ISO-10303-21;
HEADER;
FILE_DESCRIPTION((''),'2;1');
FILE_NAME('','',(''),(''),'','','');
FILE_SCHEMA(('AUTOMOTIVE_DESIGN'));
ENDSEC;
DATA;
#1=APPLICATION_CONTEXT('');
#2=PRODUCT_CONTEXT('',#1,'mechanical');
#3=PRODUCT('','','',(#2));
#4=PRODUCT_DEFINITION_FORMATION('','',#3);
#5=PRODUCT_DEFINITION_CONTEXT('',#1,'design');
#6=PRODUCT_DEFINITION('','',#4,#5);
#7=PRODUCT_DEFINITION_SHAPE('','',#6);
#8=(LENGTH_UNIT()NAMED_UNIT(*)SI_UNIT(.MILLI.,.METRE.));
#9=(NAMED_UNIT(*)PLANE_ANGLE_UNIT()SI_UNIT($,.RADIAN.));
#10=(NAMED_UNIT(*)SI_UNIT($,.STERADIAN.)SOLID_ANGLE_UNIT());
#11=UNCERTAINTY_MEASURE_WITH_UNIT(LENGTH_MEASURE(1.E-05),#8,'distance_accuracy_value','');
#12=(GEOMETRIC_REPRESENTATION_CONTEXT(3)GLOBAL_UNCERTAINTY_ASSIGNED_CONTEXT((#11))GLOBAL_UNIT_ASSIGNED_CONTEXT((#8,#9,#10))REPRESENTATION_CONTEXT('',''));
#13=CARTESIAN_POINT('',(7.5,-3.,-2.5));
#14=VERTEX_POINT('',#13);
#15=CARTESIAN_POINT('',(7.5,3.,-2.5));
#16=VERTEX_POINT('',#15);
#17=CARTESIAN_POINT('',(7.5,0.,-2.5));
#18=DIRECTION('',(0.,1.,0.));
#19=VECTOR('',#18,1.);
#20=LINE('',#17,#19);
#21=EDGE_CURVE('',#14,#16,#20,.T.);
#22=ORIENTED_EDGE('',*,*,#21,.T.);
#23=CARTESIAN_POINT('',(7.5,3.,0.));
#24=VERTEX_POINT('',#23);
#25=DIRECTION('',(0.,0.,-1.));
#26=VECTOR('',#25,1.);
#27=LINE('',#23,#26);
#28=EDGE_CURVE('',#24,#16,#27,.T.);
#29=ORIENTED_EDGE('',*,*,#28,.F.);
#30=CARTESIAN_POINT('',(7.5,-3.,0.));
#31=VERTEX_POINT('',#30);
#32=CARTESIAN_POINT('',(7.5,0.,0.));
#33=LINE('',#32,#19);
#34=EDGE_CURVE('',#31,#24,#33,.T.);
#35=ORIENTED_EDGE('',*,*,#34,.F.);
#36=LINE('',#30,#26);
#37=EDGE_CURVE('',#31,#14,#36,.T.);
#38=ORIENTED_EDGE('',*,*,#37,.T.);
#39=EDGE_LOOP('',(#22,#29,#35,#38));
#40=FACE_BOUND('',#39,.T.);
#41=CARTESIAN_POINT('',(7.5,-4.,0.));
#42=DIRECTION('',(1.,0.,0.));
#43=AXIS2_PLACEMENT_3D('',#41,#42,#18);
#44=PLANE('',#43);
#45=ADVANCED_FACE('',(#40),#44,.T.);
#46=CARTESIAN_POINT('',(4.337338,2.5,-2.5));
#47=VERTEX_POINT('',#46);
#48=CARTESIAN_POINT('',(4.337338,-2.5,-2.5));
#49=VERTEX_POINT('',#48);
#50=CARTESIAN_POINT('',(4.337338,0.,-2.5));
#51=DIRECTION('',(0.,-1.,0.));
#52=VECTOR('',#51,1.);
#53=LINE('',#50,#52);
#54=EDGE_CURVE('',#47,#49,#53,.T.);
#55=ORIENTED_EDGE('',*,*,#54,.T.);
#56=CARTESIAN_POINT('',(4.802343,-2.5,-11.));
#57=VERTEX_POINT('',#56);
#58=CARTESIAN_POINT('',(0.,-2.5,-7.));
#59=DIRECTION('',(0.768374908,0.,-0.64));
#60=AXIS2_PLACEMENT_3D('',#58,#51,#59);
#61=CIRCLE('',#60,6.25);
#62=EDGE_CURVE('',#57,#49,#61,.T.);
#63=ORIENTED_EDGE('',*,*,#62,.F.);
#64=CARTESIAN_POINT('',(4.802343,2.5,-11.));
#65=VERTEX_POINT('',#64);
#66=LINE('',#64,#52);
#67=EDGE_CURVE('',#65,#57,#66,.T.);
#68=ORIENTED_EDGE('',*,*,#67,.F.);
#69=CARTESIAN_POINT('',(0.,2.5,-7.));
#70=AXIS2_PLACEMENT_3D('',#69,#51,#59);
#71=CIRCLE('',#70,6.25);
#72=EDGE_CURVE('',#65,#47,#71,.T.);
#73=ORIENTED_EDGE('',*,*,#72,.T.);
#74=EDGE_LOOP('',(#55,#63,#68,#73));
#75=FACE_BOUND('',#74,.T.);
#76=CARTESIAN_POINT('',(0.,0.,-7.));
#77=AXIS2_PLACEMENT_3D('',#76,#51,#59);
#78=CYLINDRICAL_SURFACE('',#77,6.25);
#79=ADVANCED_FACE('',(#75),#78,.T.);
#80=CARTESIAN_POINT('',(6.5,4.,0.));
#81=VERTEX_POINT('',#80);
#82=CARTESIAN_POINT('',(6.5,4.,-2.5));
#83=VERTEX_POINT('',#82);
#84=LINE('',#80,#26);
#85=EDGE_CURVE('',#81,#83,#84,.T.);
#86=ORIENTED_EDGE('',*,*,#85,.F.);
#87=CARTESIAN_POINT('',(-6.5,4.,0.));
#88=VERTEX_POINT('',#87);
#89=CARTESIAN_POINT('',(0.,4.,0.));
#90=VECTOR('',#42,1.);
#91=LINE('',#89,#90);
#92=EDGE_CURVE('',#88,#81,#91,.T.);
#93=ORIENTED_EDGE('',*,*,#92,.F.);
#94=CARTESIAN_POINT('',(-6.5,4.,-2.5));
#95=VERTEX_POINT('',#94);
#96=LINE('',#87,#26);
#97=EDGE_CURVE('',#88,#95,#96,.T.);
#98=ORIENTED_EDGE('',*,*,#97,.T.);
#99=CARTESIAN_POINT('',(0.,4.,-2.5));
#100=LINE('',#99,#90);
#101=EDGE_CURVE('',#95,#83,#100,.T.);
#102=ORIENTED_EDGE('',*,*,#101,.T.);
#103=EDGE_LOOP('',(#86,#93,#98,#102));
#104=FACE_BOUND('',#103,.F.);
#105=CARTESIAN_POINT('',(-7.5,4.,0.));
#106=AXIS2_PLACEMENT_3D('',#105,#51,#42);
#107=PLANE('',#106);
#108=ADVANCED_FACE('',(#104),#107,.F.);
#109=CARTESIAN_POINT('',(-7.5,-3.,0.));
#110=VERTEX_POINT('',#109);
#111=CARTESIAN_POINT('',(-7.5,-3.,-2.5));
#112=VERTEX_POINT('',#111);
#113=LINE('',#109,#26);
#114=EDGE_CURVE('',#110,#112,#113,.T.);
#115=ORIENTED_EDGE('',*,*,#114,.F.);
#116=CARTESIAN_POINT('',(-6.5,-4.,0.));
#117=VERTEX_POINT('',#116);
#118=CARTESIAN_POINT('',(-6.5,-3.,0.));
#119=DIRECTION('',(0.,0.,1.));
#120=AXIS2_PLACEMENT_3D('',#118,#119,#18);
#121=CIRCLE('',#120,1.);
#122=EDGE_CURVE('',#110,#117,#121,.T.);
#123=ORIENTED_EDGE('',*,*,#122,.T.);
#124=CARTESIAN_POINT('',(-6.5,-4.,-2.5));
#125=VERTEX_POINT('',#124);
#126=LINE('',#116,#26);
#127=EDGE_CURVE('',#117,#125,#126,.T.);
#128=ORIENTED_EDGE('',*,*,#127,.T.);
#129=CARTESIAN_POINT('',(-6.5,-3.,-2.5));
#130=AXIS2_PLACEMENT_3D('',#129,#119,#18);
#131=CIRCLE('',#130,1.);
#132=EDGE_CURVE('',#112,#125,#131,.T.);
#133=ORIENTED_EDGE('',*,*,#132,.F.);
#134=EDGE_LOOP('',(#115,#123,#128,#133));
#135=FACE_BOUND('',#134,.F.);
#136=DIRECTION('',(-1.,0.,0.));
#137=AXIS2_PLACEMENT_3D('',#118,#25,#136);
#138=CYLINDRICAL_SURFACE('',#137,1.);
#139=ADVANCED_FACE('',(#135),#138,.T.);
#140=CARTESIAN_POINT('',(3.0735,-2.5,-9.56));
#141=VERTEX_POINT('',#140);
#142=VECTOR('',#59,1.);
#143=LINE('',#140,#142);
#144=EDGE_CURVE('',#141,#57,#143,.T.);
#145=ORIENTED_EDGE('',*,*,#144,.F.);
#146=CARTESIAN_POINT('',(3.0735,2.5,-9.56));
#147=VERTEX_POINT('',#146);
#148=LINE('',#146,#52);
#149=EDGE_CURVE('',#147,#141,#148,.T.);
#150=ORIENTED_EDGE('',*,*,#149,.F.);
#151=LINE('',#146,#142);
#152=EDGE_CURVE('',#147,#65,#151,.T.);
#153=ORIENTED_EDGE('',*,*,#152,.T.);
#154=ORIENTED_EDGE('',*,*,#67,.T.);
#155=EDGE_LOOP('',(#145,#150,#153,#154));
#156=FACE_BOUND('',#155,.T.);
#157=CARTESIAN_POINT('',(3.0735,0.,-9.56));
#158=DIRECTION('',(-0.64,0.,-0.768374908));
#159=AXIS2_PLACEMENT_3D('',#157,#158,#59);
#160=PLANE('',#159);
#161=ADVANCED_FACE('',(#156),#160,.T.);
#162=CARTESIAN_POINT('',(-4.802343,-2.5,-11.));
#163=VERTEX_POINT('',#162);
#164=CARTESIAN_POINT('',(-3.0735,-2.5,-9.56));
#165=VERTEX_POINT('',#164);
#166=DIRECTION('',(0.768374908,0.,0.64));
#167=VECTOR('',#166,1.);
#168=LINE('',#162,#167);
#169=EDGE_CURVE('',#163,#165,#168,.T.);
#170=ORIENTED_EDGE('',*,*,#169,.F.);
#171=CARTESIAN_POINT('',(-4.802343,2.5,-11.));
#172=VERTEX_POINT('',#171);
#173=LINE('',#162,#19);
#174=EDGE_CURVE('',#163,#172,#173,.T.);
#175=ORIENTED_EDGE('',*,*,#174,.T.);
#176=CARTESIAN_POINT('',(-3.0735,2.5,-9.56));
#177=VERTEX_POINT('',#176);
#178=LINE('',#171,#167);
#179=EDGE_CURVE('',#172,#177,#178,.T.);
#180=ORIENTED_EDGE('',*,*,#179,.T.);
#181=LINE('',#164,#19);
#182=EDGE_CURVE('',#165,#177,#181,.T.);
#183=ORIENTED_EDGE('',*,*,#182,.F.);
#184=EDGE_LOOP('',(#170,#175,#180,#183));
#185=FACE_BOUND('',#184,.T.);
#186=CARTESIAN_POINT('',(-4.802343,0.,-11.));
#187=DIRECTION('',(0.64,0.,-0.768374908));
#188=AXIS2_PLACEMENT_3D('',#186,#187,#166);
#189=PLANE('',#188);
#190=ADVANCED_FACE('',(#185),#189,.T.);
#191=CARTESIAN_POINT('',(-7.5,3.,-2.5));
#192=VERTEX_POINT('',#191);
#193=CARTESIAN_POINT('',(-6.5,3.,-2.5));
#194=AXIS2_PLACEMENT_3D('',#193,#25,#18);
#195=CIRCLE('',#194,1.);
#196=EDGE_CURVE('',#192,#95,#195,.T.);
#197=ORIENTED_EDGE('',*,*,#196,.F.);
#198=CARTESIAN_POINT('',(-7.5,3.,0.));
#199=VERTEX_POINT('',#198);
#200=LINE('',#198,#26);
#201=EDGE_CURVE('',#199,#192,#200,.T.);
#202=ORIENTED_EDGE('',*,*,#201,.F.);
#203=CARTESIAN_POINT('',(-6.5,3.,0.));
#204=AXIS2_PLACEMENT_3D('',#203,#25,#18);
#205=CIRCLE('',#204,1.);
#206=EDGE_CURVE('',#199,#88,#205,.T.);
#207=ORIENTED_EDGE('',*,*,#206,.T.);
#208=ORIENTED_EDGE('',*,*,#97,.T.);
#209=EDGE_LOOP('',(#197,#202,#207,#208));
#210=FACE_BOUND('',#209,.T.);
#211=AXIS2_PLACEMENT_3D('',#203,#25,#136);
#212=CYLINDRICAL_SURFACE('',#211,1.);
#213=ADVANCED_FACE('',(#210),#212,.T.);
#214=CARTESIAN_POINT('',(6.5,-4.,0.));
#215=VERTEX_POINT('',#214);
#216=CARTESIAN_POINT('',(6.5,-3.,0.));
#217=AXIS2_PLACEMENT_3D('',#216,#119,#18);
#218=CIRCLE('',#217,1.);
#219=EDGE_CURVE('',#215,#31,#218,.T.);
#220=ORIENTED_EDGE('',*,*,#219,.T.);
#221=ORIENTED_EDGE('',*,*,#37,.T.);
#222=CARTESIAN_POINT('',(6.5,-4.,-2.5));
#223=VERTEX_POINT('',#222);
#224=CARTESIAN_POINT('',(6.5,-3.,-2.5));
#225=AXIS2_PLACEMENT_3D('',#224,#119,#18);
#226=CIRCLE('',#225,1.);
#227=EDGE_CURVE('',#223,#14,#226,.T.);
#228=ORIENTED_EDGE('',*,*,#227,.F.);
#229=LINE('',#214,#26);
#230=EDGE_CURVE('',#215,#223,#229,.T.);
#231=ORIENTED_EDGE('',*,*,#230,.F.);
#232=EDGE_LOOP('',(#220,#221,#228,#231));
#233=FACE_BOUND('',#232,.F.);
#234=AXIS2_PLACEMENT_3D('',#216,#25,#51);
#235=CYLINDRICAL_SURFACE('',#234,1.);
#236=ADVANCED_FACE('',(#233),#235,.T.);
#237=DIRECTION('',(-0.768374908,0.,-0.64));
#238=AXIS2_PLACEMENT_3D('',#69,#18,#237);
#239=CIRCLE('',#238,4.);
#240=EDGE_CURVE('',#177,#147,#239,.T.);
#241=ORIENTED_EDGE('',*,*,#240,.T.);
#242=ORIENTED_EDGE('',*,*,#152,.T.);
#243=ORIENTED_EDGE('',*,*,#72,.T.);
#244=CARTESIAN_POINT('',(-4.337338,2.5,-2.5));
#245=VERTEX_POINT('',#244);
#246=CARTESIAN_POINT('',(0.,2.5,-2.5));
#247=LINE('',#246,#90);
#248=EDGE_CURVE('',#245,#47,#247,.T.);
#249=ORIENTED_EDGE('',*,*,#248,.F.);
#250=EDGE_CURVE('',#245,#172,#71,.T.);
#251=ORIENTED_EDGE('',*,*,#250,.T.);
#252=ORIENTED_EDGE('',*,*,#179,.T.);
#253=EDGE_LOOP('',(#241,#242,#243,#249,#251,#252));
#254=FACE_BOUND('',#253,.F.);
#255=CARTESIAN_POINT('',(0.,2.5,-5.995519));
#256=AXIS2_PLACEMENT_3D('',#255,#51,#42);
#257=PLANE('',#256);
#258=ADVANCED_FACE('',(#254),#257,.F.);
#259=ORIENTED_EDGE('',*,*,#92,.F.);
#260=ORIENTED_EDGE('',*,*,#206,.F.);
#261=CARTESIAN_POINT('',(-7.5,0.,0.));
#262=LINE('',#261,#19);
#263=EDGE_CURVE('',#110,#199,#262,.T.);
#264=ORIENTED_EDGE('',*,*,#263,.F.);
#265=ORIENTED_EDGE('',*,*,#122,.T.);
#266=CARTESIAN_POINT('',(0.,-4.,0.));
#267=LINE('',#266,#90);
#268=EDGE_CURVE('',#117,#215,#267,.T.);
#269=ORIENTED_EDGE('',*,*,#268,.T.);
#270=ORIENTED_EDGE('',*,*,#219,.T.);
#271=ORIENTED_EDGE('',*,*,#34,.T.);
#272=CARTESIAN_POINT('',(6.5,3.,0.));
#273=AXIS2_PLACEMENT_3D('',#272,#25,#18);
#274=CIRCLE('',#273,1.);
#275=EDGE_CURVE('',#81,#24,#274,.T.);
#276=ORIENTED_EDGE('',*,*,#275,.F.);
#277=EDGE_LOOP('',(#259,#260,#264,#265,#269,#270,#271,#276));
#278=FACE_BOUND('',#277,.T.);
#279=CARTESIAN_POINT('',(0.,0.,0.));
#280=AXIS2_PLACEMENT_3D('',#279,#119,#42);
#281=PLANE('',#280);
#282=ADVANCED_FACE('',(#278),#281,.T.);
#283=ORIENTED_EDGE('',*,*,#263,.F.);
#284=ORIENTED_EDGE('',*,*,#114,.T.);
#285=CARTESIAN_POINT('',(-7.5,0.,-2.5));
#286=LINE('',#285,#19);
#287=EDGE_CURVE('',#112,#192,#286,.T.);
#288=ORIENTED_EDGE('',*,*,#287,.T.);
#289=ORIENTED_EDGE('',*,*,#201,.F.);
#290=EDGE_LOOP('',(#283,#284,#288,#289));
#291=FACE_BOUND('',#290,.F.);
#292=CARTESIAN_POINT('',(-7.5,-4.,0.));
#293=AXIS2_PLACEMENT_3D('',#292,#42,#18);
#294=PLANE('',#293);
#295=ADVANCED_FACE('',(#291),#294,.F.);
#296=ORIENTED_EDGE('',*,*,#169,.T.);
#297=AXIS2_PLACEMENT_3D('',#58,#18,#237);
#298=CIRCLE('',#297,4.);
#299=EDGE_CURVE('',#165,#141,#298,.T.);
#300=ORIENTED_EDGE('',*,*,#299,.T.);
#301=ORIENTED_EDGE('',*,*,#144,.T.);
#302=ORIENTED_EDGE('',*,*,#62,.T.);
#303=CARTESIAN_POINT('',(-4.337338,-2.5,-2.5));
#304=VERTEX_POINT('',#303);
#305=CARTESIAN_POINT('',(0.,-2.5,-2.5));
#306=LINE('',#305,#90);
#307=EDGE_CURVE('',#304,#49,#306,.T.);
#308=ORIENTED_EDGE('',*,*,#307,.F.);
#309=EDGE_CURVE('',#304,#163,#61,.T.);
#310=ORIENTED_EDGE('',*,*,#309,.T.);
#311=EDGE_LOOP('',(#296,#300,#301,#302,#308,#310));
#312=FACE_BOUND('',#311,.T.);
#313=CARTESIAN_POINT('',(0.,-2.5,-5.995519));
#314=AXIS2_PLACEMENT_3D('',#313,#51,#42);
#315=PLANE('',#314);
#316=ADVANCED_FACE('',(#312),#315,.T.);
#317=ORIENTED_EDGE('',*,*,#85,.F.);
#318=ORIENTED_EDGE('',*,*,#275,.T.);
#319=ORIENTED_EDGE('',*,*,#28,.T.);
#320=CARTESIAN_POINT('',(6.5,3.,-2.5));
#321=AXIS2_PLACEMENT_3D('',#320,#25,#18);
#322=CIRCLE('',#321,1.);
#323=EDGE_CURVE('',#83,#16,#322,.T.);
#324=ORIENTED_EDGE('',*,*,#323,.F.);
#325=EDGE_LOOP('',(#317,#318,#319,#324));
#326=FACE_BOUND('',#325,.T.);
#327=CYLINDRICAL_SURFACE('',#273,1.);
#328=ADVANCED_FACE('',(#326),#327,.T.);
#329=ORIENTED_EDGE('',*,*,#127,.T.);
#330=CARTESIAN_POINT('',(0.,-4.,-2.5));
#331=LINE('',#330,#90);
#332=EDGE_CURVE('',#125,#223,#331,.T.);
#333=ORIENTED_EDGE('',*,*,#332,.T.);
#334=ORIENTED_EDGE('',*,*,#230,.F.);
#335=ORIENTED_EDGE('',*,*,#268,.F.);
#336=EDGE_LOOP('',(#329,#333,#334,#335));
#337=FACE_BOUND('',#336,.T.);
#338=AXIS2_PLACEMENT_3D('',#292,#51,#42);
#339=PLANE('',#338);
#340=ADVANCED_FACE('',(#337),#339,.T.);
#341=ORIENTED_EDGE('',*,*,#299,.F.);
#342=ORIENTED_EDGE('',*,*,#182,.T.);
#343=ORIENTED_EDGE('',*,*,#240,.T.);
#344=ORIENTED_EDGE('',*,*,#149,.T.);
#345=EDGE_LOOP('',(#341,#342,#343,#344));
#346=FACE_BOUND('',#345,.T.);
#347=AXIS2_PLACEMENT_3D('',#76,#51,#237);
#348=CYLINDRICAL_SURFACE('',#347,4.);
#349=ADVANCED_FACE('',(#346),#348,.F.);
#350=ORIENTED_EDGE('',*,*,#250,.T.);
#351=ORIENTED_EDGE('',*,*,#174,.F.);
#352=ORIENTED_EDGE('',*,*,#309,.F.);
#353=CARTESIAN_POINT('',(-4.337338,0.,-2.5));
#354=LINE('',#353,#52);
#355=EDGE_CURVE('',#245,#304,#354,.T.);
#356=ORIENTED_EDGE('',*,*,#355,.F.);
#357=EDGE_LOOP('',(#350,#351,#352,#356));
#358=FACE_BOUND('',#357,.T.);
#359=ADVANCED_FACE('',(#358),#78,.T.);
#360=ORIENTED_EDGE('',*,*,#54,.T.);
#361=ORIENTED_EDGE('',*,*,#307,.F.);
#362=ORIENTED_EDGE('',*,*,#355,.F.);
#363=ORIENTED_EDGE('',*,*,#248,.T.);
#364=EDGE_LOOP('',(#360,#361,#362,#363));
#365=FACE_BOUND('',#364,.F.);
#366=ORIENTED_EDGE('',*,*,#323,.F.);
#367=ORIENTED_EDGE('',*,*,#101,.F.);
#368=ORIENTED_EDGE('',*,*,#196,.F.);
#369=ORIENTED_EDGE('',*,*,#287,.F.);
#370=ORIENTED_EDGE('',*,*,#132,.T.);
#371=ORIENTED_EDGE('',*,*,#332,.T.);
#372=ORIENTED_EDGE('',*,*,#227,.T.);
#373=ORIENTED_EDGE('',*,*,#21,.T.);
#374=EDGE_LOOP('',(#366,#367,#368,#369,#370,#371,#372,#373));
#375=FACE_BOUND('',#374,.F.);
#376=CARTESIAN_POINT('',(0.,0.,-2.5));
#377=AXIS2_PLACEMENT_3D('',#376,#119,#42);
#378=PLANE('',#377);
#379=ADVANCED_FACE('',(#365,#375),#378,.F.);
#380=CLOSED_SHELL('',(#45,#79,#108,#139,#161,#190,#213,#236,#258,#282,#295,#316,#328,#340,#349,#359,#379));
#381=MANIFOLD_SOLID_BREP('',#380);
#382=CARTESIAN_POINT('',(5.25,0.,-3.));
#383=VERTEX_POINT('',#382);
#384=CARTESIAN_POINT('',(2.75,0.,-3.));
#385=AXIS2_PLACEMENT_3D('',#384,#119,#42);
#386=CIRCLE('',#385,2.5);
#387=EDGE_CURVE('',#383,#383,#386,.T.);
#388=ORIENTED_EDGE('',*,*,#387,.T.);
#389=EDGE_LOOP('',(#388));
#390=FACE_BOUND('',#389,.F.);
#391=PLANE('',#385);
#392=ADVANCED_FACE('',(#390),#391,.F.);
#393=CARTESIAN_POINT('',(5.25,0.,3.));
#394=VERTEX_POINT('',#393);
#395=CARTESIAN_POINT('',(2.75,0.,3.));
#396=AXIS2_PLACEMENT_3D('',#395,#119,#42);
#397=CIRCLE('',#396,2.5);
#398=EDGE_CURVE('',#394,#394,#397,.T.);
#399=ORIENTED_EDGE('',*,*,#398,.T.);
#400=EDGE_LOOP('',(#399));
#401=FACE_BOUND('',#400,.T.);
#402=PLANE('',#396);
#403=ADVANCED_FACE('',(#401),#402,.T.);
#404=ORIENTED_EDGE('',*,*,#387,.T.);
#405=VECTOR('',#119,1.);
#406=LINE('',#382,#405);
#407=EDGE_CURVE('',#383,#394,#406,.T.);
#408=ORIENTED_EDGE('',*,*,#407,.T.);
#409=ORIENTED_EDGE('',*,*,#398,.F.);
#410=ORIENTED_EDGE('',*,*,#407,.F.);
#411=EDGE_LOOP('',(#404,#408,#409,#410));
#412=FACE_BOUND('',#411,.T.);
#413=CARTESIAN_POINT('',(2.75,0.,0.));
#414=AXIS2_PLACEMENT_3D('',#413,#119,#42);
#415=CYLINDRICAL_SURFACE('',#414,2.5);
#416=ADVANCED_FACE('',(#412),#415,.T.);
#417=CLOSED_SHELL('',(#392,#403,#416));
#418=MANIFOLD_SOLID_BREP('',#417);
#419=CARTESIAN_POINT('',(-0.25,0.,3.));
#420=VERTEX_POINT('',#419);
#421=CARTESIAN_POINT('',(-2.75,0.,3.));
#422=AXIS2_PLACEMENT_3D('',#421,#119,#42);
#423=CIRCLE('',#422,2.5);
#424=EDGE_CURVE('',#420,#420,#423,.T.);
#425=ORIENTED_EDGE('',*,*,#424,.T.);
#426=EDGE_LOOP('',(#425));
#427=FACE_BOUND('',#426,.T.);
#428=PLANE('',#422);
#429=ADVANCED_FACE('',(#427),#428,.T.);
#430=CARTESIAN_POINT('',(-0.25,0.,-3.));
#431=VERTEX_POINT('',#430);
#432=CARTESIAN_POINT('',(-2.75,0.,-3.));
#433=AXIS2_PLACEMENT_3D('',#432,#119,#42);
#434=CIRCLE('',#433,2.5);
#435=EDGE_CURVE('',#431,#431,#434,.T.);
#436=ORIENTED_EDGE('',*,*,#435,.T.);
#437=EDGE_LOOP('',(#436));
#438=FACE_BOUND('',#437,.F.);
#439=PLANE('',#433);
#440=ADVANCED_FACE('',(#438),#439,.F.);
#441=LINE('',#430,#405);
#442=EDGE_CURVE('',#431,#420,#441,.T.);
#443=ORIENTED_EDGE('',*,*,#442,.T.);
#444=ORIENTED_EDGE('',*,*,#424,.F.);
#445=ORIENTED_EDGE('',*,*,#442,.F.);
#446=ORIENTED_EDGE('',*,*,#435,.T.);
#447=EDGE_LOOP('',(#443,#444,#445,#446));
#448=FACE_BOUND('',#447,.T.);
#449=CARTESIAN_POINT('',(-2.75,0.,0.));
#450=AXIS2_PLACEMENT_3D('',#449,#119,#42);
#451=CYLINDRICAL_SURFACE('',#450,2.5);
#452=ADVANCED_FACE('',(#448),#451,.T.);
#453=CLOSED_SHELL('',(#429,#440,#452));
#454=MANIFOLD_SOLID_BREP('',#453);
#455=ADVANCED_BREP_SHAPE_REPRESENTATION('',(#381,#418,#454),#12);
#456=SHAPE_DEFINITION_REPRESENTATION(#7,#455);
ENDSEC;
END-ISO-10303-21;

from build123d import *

# Parameters (mm, degrees)
F0_R     = 2.5
F1_DEPTH = 3
F2_W     = 15
F2_H     = 8
F3_DEPTH = 2.5
F5_DEPTH = 2.5
F6_R     = 1


with BuildPart() as f1:
    # F0 (on Top) → F1 (new body, symmetric)
    with BuildSketch(Plane.XY):
        with Locations((-2.75, 0)):
            Circle(F0_R)
    extrude(amount=F1_DEPTH, both=True)


with BuildPart() as f1b:
    # F0 (on Top) → F1, piece 2 (new body, symmetric)
    with BuildSketch(Plane.XY):
        with Locations((2.75, 0)):
            Circle(F0_R)
    extrude(amount=F1_DEPTH, both=True)


with BuildPart() as f3:
    # F2 (on Top) → F3 (new body)
    with BuildSketch(Plane.XY):
        Rectangle(F2_W, F2_H)
    extrude(amount=-F3_DEPTH)

    # F4 (on Front) → F5 (join, symmetric)
    with BuildSketch(Plane.XZ):
        with BuildLine():
            ThreePointArc((-3.073499634, -9.56), (0, -3), (3.073499634, -9.56))
            Line((3.073499634, -9.56), (4.8023431781, -11))
            ThreePointArc((4.8023431781, -11), (0, -0.75), (-4.8023431781, -11))
            Line((-4.8023431781, -11), (-3.073499634, -9.56))
        make_face()
    extrude(amount=F5_DEPTH, both=True)

    # F6
    f6_edges = [f3.edges().sort_by_distance(p)[0] for p in [
        (7.5, -4, -1.25),
        (-7.5, -4, -1.25),
        (7.5, 4, -1.25),
        (-7.5, 4, -1.25),
    ]]
    fillet(f6_edges, radius=F6_R)


solid = Compound([f1.part, f1b.part, f3.part])
